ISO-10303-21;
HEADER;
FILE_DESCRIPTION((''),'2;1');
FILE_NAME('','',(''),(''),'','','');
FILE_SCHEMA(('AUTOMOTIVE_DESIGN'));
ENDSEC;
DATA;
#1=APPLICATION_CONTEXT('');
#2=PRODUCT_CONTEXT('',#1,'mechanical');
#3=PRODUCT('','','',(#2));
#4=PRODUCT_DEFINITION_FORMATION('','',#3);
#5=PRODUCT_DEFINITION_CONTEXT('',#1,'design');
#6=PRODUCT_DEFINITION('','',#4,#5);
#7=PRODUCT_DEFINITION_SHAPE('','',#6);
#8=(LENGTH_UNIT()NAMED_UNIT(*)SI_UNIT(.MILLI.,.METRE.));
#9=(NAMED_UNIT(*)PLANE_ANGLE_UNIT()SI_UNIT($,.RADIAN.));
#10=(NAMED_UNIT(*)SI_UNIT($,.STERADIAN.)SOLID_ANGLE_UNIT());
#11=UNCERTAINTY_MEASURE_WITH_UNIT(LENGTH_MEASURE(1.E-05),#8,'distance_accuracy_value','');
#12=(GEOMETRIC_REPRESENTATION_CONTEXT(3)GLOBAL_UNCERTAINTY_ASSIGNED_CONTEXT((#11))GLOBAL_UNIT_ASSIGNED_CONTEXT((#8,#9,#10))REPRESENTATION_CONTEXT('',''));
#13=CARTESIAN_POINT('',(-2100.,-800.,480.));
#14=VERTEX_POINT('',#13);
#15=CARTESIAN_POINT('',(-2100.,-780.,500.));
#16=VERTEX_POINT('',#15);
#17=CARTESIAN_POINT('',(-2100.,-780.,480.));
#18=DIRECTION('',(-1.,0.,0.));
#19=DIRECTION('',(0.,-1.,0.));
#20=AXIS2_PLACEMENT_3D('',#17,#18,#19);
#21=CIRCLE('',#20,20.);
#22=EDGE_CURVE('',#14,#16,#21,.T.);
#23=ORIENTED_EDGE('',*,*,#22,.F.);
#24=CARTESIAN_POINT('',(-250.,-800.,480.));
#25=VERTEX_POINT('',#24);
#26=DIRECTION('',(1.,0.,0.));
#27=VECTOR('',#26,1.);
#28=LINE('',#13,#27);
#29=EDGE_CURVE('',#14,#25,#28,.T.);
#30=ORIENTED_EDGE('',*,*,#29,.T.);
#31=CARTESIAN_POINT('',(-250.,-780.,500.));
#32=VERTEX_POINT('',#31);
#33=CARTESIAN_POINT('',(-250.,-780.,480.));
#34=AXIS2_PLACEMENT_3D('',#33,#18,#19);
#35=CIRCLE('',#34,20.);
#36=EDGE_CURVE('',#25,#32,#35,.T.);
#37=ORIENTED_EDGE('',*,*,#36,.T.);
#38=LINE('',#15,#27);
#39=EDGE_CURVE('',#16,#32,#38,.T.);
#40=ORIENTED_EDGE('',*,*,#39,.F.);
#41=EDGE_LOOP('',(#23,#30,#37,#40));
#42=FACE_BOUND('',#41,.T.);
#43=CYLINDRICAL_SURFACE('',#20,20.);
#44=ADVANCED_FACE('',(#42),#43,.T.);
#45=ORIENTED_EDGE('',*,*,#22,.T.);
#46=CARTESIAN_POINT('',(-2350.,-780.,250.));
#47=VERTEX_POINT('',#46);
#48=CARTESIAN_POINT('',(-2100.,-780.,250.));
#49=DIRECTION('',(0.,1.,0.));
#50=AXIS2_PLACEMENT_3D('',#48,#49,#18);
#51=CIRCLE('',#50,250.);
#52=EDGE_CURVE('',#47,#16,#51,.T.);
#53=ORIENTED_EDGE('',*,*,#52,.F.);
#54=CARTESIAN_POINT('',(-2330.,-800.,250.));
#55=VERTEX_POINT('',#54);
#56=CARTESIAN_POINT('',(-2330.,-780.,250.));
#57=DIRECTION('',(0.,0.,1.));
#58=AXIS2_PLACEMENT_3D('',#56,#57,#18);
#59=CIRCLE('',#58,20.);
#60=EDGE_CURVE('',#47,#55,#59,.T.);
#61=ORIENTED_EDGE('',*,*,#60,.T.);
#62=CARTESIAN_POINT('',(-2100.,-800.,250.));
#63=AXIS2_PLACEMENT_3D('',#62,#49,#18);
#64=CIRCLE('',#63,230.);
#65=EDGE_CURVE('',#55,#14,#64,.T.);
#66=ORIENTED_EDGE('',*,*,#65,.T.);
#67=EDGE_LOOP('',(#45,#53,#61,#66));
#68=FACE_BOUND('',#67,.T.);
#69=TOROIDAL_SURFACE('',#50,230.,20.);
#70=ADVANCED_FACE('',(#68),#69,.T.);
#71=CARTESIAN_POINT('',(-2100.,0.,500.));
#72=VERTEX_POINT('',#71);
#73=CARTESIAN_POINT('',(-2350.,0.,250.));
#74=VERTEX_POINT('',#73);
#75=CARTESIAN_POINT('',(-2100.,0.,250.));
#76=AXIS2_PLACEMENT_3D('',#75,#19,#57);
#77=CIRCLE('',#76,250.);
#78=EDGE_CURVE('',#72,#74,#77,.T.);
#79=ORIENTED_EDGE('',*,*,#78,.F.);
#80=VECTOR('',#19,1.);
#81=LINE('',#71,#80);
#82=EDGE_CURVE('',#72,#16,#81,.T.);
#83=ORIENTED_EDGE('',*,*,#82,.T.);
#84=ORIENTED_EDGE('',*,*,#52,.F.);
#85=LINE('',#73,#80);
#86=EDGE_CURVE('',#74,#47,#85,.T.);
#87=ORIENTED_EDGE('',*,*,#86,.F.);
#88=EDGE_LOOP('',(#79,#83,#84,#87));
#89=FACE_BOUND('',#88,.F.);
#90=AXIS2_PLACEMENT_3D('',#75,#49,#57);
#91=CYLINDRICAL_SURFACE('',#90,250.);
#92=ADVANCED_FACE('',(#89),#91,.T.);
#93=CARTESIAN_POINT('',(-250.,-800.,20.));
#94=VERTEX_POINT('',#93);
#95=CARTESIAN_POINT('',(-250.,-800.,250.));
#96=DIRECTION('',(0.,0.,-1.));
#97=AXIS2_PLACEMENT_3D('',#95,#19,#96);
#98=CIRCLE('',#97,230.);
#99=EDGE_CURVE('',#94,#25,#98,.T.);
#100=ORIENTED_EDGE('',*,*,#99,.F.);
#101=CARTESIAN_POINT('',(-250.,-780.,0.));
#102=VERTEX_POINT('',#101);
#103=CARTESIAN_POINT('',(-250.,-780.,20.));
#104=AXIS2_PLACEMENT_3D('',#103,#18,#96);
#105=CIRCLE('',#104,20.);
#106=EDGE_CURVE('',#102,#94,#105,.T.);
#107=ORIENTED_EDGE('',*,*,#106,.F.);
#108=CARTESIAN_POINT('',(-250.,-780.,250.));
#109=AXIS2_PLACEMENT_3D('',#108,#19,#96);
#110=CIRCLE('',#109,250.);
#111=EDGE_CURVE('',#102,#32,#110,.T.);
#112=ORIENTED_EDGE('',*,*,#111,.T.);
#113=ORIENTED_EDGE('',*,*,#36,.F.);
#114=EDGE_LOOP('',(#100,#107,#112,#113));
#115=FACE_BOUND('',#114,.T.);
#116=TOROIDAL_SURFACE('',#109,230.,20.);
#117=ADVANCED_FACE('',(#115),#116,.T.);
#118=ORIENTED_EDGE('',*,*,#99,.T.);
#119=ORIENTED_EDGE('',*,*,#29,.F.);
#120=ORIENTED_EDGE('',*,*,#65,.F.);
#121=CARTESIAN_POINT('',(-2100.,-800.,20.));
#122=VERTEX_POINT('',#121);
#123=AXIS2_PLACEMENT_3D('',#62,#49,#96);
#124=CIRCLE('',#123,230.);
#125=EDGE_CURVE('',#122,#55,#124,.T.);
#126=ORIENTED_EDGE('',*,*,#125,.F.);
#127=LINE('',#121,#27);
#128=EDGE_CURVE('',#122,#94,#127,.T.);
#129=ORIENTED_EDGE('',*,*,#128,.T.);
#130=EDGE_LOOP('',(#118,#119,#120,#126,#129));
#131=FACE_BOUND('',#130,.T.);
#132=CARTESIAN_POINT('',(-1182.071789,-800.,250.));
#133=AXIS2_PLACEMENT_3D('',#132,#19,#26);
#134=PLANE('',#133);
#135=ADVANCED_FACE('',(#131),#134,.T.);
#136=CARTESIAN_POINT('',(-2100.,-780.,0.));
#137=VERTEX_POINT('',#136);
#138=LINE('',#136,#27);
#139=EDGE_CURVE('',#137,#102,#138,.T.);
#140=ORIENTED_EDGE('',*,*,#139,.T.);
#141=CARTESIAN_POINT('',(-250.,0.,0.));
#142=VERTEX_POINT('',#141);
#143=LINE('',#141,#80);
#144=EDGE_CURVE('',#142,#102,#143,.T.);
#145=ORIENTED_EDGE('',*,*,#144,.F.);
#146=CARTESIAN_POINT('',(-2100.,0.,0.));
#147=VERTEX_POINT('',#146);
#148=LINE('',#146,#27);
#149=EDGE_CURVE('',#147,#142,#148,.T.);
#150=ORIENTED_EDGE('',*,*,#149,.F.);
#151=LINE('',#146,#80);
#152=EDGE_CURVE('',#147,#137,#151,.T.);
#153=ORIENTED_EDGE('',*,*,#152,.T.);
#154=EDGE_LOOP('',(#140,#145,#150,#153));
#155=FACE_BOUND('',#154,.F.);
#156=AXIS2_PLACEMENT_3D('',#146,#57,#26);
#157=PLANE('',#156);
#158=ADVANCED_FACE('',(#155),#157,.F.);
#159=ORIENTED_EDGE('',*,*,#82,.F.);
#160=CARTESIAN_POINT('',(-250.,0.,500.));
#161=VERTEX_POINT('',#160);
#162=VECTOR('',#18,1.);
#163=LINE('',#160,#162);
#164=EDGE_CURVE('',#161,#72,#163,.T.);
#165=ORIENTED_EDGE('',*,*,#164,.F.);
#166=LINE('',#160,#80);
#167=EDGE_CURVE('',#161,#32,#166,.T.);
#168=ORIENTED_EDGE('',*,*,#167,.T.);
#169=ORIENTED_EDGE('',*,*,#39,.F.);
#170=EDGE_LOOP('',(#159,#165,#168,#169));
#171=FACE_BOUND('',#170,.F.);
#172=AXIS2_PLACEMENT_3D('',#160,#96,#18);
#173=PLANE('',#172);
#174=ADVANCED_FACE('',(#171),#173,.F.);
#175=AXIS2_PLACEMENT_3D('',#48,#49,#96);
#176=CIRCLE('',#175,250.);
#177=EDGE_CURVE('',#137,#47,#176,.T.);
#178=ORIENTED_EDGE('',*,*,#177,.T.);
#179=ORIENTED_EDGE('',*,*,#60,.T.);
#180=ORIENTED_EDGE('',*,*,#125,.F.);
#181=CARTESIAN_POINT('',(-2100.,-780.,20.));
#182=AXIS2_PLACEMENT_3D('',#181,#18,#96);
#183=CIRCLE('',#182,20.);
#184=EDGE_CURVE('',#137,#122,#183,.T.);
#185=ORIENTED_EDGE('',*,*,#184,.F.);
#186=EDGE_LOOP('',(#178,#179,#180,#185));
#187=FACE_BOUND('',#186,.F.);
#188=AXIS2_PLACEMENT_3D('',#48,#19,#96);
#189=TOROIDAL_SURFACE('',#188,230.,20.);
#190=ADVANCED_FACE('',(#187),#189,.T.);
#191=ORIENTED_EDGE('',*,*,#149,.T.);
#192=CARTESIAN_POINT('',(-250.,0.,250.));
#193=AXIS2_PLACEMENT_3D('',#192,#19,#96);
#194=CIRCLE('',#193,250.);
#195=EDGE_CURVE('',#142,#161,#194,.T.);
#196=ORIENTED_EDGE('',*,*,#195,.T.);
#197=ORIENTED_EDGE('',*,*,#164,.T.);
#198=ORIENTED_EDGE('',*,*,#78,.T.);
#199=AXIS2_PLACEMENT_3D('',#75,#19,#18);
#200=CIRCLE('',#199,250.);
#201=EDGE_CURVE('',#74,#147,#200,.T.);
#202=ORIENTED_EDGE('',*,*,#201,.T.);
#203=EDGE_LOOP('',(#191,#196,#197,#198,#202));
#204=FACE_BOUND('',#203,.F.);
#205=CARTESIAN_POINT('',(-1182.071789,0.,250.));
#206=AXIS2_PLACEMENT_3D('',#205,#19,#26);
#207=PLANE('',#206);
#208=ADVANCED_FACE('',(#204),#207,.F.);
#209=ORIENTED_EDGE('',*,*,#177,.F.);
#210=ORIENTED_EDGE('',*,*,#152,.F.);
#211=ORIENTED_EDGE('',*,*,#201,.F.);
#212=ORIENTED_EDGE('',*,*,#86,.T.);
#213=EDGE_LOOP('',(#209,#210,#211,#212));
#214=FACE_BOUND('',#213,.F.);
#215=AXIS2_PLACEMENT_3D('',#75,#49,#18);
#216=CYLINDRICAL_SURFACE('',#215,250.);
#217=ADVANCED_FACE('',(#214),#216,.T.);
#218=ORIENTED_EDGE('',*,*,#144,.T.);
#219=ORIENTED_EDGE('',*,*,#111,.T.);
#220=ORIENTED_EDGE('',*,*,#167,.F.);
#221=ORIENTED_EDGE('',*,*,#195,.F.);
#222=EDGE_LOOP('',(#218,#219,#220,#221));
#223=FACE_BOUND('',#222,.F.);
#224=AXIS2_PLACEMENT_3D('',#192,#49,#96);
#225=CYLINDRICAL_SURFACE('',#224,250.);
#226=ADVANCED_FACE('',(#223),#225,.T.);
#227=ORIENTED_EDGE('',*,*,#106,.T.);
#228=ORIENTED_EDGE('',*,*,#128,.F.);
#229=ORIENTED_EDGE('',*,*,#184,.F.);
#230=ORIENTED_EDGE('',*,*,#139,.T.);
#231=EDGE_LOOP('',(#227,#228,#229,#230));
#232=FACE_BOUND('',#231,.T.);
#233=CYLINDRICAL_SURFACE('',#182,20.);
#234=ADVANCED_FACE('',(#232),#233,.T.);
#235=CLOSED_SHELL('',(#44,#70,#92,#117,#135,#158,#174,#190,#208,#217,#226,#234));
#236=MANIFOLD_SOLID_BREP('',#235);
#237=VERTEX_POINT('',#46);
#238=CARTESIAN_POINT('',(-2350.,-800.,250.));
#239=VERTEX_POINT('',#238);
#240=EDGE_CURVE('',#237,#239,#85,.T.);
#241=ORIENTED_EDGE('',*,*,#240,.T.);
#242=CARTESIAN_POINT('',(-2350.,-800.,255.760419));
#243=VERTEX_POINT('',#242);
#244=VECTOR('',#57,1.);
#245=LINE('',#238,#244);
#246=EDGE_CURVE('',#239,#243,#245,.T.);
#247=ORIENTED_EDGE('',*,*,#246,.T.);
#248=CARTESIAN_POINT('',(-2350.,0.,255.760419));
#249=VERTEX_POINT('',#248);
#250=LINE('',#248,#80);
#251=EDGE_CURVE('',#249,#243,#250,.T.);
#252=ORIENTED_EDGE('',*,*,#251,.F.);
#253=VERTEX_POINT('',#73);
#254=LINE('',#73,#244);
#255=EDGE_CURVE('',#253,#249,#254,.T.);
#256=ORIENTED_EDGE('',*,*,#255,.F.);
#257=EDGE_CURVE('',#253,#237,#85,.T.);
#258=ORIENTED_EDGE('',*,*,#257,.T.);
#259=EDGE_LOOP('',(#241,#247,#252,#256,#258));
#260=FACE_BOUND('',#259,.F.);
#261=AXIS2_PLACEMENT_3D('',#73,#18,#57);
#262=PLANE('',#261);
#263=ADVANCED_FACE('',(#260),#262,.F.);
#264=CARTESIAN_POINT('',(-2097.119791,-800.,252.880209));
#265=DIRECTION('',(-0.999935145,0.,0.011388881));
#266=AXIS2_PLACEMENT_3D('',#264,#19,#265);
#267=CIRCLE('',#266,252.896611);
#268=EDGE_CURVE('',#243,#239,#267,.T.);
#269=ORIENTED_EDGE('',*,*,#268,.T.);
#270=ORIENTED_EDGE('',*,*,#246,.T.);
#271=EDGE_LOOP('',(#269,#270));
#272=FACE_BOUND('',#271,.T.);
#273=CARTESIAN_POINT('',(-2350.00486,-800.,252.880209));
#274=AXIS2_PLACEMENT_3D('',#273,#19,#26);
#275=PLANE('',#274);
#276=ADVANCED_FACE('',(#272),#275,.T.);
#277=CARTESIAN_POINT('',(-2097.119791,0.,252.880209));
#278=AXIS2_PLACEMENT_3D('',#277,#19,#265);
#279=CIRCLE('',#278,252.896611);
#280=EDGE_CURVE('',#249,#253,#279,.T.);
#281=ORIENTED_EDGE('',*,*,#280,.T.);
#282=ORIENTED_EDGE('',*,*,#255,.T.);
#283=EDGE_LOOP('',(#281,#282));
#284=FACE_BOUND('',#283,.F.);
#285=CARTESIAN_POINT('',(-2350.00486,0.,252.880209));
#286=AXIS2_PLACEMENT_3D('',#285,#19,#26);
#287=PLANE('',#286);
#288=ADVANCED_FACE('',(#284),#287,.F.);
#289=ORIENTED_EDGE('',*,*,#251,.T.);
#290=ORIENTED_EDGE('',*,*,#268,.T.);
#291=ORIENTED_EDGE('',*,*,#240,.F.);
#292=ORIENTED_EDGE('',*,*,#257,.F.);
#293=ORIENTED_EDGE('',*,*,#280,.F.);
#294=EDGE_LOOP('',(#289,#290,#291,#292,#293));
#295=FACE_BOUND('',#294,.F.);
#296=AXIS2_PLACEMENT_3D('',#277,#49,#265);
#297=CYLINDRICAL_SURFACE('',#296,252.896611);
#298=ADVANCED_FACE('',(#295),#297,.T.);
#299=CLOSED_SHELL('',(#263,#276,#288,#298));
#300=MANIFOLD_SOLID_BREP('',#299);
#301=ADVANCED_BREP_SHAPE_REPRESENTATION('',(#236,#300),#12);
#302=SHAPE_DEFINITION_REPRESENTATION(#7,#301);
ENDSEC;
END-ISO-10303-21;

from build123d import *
from build123d import SkipClean  # not in build123d's __all__

# Parameters (mm, degrees)
F1_DEPTH    = 800
F2_T1_DEPTH = 1850
F2_T4_ANGLE = 180
F2_T6_ANGLE = 90
F2_T8_ANGLE = 90


# Not quite as in the source:
# - a fillet or chamfer that OpenCascade refuses, or shapes differently, is made with other operations: its cross-section is extruded or revolved along the edge and cut away or added


with BuildPart() as f1:
    # F0 (on Front) → F1 (new body)
    with BuildSketch(Plane.XZ):
        with BuildLine():
            ThreePointArc((-2350, 255.7604187137), (-2350.0164017124, 252.8802093568), (-2350, 250))
            Line((-2350, 250), (-2350, 255.7604187137))
        make_face()
        with BuildLine():
            Line((-2100, 0), (-250, 0))
            ThreePointArc((-250, 0), (0, 250), (-250, 500))
            Line((-250, 500), (-2100, 500))
            ThreePointArc((-2100, 500), (-2276.7766952966, 426.7766952966), (-2350, 250))
            ThreePointArc((-2350, 250), (-2276.7766952966, 73.2233047034), (-2100, 0))
        make_face()
    extrude(amount=F1_DEPTH)

    # F2: fillet of radius 20 on 5 edges, made by hand

    # F2_s2 → F2_t1 (cut)
    with BuildSketch(Plane.YZ.offset(-2100)):
        with BuildLine():
            ThreePointArc((-780, 0), (-794.1421356237, 5.8578643763), (-800, 20))
            Line((-800, 20), (-800, 0))
            Line((-800, 0), (-780, 0))
        make_face()
        with BuildLine():
            ThreePointArc((-800, 480), (-794.1421356237, 494.1421356237), (-780, 500))
            Line((-780, 500), (-800, 500))
            Line((-800, 500), (-800, 480))
        make_face()
    extrude(amount=F2_T1_DEPTH, mode=Mode.SUBTRACT)

    # F2_s3 → F2_t4 (revolve, cut)
    with BuildSketch(Plane.YZ.offset(-250)):
        with BuildLine():
            ThreePointArc((-780, 0), (-794.1421356237, 5.8578643763), (-800, 20))
            Line((-800, 20), (-800, 0))
            Line((-800, 0), (-780, 0))
        make_face()
    revolve(axis=Axis((-250, -800, 250), (0, -1, 0)), revolution_arc=F2_T4_ANGLE, mode=Mode.SUBTRACT)

    # F2_s5 → F2_t6 (revolve, cut)
    with BuildSketch(Plane.YZ.offset(-2100)):
        with BuildLine():
            ThreePointArc((-780, 0), (-794.1421356237, 5.8578643763), (-800, 20))
            Line((-800, 20), (-800, 0))
            Line((-800, 0), (-780, 0))
        make_face()
    revolve(axis=Axis((-2100, -800, 250), (0, 1, 0)), revolution_arc=F2_T6_ANGLE, mode=Mode.SUBTRACT)

    # F2_s7 → F2_t8 (revolve, cut)
    with BuildSketch(Plane.XY.offset(250)):
        with BuildLine():
            ThreePointArc((-2330, -800), (-2344.1421356237, -794.1421356237), (-2350, -780))
            Line((-2350, -780), (-2350, -800))
            Line((-2350, -800), (-2330, -800))
        make_face()
    with SkipClean():  # cleaning this boolean's faces spoils the solid; the shape is the same uncleaned
        revolve(axis=Axis((-2100, -800, 250), (0, 1, 0)), revolution_arc=F2_T8_ANGLE, mode=Mode.SUBTRACT)


solid = f1.part
